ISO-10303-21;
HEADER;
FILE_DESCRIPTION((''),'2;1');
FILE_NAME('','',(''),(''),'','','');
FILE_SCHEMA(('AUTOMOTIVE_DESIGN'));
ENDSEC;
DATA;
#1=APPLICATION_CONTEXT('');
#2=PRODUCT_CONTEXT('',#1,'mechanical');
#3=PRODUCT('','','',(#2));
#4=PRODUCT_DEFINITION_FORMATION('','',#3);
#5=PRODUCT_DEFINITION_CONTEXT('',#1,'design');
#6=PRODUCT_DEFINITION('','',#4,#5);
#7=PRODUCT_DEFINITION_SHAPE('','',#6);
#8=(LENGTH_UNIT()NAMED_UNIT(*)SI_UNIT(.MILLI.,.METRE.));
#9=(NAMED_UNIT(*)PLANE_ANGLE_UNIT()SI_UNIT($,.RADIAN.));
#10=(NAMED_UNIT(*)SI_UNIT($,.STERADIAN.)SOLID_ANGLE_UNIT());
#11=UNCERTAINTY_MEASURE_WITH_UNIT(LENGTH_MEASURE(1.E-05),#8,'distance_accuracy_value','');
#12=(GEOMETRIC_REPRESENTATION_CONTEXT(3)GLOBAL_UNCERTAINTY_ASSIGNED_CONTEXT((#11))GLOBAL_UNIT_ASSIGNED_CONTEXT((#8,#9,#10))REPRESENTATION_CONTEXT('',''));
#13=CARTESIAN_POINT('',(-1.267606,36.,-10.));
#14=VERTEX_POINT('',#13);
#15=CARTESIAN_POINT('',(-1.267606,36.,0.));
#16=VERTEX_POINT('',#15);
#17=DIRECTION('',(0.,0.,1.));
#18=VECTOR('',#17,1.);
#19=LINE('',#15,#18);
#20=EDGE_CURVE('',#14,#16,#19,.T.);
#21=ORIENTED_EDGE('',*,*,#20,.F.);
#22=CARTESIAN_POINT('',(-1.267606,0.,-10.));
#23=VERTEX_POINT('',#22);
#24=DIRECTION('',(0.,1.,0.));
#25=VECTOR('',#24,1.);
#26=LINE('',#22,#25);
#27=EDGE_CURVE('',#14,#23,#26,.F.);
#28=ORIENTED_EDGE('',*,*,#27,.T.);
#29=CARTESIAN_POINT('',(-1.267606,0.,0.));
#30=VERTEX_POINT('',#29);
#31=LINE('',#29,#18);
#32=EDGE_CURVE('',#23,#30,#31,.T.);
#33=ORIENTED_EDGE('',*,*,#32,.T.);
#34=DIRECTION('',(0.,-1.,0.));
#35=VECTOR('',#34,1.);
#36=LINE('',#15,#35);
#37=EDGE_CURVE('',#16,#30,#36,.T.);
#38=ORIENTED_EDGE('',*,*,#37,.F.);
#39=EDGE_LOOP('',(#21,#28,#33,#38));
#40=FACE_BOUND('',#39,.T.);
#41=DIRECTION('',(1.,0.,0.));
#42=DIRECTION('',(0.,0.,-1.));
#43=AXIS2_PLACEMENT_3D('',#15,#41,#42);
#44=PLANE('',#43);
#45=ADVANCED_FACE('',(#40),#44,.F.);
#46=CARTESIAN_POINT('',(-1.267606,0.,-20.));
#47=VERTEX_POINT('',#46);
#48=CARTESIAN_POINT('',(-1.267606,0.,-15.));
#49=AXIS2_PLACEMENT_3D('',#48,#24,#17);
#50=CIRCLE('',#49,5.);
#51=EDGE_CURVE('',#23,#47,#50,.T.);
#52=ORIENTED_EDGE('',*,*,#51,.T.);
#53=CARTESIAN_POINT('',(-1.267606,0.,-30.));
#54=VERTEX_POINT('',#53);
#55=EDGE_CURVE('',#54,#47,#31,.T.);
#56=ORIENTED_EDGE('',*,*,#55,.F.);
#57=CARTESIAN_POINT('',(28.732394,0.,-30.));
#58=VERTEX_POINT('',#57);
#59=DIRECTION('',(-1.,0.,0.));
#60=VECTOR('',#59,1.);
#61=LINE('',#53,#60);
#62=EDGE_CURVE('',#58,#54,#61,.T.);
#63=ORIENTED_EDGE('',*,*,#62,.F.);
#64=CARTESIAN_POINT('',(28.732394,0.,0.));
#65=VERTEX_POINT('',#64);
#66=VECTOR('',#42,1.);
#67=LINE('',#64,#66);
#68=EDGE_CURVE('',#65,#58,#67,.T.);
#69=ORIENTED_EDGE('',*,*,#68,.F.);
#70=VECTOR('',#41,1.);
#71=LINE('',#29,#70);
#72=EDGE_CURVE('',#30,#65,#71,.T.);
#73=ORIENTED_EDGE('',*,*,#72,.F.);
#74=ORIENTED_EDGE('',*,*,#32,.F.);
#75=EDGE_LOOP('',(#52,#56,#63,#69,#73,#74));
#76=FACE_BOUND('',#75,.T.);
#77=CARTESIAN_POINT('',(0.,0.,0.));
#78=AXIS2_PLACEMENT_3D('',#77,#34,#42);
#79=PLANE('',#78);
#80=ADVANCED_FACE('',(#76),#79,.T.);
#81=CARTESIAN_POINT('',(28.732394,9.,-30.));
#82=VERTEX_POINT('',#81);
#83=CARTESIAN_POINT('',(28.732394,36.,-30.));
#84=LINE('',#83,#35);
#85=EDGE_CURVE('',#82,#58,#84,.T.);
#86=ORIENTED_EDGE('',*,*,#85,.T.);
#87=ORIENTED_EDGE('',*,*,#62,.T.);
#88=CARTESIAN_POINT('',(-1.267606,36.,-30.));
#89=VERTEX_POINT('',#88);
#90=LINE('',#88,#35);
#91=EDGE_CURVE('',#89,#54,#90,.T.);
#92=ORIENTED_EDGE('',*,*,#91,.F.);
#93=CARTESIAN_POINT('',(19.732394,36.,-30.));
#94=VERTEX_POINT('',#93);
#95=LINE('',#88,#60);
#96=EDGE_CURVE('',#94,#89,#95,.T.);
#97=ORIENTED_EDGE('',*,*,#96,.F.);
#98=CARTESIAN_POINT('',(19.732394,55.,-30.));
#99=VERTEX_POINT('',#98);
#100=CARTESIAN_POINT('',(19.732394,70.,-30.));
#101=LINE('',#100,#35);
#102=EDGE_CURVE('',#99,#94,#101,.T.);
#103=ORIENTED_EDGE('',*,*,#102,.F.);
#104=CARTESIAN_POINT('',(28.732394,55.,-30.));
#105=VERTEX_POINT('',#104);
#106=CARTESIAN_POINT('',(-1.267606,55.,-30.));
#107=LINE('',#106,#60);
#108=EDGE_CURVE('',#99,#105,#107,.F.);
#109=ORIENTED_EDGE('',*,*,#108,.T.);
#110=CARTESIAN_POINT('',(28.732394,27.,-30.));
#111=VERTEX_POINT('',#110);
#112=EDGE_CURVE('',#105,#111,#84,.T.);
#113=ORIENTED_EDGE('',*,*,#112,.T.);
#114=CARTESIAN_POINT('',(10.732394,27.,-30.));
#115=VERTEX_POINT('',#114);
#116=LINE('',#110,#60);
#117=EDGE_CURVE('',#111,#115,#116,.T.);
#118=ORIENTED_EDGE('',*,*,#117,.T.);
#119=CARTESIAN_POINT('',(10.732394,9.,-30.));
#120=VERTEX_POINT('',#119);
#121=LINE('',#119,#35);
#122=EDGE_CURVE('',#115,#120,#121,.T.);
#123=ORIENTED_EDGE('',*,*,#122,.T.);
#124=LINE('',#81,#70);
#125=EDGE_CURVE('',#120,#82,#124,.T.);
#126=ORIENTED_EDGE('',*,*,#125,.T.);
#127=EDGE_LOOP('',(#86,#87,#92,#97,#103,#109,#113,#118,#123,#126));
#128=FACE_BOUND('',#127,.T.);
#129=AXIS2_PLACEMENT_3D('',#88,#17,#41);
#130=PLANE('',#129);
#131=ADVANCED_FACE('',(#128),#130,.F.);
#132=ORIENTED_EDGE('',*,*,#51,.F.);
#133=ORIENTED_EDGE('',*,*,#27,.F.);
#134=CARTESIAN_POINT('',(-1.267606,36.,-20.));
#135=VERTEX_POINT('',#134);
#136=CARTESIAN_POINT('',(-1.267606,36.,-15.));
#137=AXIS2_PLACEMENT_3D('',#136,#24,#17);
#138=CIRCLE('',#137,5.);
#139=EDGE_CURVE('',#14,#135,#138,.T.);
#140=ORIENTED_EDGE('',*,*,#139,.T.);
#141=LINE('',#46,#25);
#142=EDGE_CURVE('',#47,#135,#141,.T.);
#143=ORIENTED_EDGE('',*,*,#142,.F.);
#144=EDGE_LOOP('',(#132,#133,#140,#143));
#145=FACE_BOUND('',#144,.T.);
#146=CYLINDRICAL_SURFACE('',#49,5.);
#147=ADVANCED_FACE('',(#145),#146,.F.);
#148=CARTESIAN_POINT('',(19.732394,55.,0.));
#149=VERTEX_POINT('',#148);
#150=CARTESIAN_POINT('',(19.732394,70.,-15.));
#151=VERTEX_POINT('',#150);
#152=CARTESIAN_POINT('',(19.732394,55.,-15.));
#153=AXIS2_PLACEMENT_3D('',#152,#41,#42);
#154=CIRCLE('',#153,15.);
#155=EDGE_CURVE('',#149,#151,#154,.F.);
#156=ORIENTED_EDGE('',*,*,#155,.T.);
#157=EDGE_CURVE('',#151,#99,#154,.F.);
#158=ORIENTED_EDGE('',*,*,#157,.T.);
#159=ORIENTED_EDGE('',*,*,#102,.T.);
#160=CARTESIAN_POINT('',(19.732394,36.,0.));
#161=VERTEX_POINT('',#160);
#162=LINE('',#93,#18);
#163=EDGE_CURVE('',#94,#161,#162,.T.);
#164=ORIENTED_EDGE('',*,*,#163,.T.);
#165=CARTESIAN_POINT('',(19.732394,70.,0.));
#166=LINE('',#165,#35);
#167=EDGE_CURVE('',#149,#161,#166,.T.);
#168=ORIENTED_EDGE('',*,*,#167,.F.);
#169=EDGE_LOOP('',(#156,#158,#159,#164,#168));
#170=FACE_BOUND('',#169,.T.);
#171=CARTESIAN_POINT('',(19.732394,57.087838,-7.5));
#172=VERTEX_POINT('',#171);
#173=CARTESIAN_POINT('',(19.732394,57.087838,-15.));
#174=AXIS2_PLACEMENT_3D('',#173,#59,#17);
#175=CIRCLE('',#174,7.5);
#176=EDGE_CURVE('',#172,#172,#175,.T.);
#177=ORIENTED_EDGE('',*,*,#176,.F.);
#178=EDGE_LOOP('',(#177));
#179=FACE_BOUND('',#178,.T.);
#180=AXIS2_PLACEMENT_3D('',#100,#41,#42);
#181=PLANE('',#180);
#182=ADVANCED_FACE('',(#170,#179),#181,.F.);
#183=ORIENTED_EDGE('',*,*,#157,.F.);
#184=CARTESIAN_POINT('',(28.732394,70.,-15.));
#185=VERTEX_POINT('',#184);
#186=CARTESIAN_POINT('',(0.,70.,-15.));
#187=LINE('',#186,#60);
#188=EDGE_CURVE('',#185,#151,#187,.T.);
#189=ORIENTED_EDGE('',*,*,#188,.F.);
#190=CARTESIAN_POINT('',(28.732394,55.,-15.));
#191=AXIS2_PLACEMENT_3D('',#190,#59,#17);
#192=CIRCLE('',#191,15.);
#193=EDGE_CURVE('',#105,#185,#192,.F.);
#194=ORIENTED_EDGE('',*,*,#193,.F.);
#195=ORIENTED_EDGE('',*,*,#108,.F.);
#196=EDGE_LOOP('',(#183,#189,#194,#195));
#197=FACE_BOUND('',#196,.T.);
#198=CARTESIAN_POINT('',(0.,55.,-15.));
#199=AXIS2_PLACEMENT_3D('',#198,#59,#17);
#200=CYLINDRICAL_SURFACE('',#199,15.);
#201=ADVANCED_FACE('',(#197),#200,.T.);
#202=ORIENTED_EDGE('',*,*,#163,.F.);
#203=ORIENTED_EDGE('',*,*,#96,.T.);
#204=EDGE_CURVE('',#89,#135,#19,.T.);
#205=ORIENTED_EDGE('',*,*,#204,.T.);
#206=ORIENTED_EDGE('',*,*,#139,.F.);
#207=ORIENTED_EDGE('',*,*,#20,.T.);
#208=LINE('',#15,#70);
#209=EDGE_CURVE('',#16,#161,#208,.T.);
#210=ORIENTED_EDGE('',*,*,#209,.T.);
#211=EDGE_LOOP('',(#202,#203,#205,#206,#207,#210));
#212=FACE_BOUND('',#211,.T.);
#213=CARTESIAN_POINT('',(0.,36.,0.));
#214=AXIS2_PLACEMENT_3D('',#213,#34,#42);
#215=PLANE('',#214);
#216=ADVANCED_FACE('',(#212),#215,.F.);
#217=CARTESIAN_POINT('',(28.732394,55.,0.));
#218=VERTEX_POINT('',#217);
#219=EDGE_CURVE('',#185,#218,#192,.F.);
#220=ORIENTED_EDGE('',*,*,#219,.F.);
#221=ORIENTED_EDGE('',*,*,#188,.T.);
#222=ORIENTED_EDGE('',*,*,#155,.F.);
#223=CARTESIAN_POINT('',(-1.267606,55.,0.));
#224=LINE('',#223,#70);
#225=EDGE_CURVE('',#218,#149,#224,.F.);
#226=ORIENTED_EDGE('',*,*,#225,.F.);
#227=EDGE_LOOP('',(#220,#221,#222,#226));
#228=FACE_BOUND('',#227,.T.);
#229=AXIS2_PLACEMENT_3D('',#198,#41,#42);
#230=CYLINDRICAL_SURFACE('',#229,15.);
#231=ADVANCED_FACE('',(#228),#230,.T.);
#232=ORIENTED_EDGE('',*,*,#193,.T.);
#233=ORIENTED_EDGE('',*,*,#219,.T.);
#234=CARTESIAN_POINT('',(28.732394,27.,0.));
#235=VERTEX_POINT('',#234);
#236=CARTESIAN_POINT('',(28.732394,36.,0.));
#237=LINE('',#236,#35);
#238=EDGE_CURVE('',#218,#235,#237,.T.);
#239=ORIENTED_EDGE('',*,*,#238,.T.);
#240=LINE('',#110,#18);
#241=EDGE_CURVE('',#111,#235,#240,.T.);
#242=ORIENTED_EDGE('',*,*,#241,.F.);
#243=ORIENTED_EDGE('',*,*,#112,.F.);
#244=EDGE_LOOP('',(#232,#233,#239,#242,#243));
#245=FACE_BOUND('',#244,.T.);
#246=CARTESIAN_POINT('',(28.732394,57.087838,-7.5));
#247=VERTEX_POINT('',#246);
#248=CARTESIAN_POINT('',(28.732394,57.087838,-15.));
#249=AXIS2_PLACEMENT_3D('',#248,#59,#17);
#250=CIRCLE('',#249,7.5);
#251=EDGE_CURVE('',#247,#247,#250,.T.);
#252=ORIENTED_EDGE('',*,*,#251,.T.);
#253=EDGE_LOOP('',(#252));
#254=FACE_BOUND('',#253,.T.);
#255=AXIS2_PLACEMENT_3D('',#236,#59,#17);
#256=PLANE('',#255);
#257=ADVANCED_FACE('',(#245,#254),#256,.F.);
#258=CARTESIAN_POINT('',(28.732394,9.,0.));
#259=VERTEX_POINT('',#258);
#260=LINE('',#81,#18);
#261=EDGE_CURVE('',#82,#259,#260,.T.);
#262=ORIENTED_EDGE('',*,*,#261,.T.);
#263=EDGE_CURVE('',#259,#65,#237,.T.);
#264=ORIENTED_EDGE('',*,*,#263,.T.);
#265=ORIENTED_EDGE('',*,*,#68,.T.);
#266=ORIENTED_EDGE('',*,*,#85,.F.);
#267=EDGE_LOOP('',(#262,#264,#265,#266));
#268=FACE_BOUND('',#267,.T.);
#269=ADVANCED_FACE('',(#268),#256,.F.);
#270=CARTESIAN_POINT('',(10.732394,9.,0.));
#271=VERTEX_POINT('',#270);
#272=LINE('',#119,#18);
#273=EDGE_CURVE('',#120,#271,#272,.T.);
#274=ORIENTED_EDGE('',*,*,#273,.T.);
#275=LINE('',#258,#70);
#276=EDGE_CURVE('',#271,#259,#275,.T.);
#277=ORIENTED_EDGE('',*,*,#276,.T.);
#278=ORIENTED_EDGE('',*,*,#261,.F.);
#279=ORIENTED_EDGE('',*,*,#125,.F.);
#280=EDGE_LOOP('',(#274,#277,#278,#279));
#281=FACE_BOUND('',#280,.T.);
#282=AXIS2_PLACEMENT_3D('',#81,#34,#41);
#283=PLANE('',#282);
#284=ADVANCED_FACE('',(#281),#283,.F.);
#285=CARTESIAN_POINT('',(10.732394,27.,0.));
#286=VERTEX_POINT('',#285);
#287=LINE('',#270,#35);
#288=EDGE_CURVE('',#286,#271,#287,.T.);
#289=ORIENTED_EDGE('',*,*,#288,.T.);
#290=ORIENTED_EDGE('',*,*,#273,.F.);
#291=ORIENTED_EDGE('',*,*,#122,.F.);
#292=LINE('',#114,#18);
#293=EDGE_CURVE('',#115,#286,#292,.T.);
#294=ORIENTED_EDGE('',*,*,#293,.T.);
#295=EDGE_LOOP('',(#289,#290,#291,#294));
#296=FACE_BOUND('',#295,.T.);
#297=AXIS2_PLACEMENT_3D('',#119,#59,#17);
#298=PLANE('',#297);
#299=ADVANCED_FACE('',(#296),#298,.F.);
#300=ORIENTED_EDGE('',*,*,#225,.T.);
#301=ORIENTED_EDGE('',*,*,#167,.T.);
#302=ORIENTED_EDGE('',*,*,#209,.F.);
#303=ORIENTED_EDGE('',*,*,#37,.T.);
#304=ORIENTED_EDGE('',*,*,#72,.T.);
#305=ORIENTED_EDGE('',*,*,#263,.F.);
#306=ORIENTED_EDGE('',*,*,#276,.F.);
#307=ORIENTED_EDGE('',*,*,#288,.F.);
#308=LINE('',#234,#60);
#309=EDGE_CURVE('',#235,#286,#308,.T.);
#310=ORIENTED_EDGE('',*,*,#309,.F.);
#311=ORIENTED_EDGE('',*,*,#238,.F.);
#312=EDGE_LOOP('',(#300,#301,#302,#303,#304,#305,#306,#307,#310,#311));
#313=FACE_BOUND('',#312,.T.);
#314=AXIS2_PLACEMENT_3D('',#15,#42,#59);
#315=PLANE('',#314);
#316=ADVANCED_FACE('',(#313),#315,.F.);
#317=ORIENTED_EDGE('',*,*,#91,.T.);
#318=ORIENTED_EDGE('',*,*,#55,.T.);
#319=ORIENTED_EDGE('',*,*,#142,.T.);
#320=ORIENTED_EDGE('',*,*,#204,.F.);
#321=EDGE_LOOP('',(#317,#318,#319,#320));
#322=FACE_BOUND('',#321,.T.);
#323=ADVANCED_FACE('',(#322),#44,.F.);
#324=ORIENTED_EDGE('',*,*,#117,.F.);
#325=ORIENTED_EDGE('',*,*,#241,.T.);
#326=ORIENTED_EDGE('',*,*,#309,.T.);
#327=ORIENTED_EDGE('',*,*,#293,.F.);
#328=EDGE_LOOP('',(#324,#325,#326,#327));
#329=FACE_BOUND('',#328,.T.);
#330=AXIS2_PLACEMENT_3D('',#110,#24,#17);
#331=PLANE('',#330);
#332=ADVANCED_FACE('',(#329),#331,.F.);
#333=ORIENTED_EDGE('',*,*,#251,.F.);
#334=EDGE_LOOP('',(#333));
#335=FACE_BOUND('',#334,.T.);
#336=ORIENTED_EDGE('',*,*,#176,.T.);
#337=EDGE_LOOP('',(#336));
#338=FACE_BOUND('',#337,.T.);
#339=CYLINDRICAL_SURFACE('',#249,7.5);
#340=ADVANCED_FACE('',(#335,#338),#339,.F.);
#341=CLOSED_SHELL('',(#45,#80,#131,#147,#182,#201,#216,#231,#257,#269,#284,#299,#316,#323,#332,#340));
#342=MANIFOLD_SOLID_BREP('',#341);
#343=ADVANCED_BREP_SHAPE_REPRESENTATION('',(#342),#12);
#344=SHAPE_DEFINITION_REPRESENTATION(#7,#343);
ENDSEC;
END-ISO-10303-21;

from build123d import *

# Parameters (mm, degrees)
IZIM1_W                     = 30
IZIM1_H                     = 30
Y_KSEKLIK_EKSTR_ZYON1_DEPTH = 36
IZIM3_W                     = 18
IZIM3_H                     = 18
KES_EKSTR_ZYON2_DEPTH       = 55.968631837
IZIM5_R                     = 5
KES_EKSTR_ZYON3_DEPTH       = 55.968631837
IZIM6_W                     = 9
IZIM6_H                     = 30
Y_KSEKLIK_EKSTR_ZYON2_DEPTH = 34
RADYUS1_R                   = 15
IZIM7_R                     = 7.5
KES_EKSTR_ZYON4_DEPTH       = 80


with BuildPart() as part:
    # Çizim1 → Yükseklik-Ekstrüzyon1 (new body)
    with BuildSketch(Plane(origin=(0, 0, 0), x_dir=(1, 0, 0), z_dir=(0, 1, 0))):
        with Locations((13.732394366, 15)):
            Rectangle(IZIM1_W, IZIM1_H)
    extrude(amount=Y_KSEKLIK_EKSTR_ZYON1_DEPTH)

    # Çizim3 → Kes-Ekstrüzyon2 (cut, through all)
    with BuildSketch(Plane.XY):
        with Locations((19.732394366, 18)):
            Rectangle(IZIM3_W, IZIM3_H)
    extrude(amount=-KES_EKSTR_ZYON2_DEPTH, mode=Mode.SUBTRACT)

    # Çizim5 → Kes-Ekstrüzyon3 (cut, through all)
    with BuildSketch(Plane(origin=(0, 36, 0), x_dir=(1, 0, 0), z_dir=(0, 1, 0))):
        with Locations((-1.267605634, 15)):
            Circle(IZIM5_R)
    extrude(amount=-KES_EKSTR_ZYON3_DEPTH, mode=Mode.SUBTRACT)

    # Çizim6 → Yükseklik-Ekstrüzyon2 (add)
    with BuildSketch(Plane(origin=(0, 36, 0), x_dir=(1, 0, 0), z_dir=(0, 1, 0))):
        with Locations((24.232394366, 15)):
            Rectangle(IZIM6_W, IZIM6_H)
    extrude(amount=Y_KSEKLIK_EKSTR_ZYON2_DEPTH)

    # Radyus1
    radyus1_edges = [part.edges().sort_by_distance(p)[0] for p in [
        (24.232394366, 70, 0),
        (24.232394366, 70, -30),
    ]]
    fillet(radyus1_edges, radius=RADYUS1_R - 0.0001)  # a hair under: the kernel refuses the full size

    # Çizim7 → Kes-Ekstrüzyon4 (cut, through all)
    with BuildSketch(Plane.ZY.offset(-19.732394366)):
        with Locations((-15, 57.087838251)):
            Circle(IZIM7_R)
    extrude(amount=-KES_EKSTR_ZYON4_DEPTH, mode=Mode.SUBTRACT)


solid = part.part
